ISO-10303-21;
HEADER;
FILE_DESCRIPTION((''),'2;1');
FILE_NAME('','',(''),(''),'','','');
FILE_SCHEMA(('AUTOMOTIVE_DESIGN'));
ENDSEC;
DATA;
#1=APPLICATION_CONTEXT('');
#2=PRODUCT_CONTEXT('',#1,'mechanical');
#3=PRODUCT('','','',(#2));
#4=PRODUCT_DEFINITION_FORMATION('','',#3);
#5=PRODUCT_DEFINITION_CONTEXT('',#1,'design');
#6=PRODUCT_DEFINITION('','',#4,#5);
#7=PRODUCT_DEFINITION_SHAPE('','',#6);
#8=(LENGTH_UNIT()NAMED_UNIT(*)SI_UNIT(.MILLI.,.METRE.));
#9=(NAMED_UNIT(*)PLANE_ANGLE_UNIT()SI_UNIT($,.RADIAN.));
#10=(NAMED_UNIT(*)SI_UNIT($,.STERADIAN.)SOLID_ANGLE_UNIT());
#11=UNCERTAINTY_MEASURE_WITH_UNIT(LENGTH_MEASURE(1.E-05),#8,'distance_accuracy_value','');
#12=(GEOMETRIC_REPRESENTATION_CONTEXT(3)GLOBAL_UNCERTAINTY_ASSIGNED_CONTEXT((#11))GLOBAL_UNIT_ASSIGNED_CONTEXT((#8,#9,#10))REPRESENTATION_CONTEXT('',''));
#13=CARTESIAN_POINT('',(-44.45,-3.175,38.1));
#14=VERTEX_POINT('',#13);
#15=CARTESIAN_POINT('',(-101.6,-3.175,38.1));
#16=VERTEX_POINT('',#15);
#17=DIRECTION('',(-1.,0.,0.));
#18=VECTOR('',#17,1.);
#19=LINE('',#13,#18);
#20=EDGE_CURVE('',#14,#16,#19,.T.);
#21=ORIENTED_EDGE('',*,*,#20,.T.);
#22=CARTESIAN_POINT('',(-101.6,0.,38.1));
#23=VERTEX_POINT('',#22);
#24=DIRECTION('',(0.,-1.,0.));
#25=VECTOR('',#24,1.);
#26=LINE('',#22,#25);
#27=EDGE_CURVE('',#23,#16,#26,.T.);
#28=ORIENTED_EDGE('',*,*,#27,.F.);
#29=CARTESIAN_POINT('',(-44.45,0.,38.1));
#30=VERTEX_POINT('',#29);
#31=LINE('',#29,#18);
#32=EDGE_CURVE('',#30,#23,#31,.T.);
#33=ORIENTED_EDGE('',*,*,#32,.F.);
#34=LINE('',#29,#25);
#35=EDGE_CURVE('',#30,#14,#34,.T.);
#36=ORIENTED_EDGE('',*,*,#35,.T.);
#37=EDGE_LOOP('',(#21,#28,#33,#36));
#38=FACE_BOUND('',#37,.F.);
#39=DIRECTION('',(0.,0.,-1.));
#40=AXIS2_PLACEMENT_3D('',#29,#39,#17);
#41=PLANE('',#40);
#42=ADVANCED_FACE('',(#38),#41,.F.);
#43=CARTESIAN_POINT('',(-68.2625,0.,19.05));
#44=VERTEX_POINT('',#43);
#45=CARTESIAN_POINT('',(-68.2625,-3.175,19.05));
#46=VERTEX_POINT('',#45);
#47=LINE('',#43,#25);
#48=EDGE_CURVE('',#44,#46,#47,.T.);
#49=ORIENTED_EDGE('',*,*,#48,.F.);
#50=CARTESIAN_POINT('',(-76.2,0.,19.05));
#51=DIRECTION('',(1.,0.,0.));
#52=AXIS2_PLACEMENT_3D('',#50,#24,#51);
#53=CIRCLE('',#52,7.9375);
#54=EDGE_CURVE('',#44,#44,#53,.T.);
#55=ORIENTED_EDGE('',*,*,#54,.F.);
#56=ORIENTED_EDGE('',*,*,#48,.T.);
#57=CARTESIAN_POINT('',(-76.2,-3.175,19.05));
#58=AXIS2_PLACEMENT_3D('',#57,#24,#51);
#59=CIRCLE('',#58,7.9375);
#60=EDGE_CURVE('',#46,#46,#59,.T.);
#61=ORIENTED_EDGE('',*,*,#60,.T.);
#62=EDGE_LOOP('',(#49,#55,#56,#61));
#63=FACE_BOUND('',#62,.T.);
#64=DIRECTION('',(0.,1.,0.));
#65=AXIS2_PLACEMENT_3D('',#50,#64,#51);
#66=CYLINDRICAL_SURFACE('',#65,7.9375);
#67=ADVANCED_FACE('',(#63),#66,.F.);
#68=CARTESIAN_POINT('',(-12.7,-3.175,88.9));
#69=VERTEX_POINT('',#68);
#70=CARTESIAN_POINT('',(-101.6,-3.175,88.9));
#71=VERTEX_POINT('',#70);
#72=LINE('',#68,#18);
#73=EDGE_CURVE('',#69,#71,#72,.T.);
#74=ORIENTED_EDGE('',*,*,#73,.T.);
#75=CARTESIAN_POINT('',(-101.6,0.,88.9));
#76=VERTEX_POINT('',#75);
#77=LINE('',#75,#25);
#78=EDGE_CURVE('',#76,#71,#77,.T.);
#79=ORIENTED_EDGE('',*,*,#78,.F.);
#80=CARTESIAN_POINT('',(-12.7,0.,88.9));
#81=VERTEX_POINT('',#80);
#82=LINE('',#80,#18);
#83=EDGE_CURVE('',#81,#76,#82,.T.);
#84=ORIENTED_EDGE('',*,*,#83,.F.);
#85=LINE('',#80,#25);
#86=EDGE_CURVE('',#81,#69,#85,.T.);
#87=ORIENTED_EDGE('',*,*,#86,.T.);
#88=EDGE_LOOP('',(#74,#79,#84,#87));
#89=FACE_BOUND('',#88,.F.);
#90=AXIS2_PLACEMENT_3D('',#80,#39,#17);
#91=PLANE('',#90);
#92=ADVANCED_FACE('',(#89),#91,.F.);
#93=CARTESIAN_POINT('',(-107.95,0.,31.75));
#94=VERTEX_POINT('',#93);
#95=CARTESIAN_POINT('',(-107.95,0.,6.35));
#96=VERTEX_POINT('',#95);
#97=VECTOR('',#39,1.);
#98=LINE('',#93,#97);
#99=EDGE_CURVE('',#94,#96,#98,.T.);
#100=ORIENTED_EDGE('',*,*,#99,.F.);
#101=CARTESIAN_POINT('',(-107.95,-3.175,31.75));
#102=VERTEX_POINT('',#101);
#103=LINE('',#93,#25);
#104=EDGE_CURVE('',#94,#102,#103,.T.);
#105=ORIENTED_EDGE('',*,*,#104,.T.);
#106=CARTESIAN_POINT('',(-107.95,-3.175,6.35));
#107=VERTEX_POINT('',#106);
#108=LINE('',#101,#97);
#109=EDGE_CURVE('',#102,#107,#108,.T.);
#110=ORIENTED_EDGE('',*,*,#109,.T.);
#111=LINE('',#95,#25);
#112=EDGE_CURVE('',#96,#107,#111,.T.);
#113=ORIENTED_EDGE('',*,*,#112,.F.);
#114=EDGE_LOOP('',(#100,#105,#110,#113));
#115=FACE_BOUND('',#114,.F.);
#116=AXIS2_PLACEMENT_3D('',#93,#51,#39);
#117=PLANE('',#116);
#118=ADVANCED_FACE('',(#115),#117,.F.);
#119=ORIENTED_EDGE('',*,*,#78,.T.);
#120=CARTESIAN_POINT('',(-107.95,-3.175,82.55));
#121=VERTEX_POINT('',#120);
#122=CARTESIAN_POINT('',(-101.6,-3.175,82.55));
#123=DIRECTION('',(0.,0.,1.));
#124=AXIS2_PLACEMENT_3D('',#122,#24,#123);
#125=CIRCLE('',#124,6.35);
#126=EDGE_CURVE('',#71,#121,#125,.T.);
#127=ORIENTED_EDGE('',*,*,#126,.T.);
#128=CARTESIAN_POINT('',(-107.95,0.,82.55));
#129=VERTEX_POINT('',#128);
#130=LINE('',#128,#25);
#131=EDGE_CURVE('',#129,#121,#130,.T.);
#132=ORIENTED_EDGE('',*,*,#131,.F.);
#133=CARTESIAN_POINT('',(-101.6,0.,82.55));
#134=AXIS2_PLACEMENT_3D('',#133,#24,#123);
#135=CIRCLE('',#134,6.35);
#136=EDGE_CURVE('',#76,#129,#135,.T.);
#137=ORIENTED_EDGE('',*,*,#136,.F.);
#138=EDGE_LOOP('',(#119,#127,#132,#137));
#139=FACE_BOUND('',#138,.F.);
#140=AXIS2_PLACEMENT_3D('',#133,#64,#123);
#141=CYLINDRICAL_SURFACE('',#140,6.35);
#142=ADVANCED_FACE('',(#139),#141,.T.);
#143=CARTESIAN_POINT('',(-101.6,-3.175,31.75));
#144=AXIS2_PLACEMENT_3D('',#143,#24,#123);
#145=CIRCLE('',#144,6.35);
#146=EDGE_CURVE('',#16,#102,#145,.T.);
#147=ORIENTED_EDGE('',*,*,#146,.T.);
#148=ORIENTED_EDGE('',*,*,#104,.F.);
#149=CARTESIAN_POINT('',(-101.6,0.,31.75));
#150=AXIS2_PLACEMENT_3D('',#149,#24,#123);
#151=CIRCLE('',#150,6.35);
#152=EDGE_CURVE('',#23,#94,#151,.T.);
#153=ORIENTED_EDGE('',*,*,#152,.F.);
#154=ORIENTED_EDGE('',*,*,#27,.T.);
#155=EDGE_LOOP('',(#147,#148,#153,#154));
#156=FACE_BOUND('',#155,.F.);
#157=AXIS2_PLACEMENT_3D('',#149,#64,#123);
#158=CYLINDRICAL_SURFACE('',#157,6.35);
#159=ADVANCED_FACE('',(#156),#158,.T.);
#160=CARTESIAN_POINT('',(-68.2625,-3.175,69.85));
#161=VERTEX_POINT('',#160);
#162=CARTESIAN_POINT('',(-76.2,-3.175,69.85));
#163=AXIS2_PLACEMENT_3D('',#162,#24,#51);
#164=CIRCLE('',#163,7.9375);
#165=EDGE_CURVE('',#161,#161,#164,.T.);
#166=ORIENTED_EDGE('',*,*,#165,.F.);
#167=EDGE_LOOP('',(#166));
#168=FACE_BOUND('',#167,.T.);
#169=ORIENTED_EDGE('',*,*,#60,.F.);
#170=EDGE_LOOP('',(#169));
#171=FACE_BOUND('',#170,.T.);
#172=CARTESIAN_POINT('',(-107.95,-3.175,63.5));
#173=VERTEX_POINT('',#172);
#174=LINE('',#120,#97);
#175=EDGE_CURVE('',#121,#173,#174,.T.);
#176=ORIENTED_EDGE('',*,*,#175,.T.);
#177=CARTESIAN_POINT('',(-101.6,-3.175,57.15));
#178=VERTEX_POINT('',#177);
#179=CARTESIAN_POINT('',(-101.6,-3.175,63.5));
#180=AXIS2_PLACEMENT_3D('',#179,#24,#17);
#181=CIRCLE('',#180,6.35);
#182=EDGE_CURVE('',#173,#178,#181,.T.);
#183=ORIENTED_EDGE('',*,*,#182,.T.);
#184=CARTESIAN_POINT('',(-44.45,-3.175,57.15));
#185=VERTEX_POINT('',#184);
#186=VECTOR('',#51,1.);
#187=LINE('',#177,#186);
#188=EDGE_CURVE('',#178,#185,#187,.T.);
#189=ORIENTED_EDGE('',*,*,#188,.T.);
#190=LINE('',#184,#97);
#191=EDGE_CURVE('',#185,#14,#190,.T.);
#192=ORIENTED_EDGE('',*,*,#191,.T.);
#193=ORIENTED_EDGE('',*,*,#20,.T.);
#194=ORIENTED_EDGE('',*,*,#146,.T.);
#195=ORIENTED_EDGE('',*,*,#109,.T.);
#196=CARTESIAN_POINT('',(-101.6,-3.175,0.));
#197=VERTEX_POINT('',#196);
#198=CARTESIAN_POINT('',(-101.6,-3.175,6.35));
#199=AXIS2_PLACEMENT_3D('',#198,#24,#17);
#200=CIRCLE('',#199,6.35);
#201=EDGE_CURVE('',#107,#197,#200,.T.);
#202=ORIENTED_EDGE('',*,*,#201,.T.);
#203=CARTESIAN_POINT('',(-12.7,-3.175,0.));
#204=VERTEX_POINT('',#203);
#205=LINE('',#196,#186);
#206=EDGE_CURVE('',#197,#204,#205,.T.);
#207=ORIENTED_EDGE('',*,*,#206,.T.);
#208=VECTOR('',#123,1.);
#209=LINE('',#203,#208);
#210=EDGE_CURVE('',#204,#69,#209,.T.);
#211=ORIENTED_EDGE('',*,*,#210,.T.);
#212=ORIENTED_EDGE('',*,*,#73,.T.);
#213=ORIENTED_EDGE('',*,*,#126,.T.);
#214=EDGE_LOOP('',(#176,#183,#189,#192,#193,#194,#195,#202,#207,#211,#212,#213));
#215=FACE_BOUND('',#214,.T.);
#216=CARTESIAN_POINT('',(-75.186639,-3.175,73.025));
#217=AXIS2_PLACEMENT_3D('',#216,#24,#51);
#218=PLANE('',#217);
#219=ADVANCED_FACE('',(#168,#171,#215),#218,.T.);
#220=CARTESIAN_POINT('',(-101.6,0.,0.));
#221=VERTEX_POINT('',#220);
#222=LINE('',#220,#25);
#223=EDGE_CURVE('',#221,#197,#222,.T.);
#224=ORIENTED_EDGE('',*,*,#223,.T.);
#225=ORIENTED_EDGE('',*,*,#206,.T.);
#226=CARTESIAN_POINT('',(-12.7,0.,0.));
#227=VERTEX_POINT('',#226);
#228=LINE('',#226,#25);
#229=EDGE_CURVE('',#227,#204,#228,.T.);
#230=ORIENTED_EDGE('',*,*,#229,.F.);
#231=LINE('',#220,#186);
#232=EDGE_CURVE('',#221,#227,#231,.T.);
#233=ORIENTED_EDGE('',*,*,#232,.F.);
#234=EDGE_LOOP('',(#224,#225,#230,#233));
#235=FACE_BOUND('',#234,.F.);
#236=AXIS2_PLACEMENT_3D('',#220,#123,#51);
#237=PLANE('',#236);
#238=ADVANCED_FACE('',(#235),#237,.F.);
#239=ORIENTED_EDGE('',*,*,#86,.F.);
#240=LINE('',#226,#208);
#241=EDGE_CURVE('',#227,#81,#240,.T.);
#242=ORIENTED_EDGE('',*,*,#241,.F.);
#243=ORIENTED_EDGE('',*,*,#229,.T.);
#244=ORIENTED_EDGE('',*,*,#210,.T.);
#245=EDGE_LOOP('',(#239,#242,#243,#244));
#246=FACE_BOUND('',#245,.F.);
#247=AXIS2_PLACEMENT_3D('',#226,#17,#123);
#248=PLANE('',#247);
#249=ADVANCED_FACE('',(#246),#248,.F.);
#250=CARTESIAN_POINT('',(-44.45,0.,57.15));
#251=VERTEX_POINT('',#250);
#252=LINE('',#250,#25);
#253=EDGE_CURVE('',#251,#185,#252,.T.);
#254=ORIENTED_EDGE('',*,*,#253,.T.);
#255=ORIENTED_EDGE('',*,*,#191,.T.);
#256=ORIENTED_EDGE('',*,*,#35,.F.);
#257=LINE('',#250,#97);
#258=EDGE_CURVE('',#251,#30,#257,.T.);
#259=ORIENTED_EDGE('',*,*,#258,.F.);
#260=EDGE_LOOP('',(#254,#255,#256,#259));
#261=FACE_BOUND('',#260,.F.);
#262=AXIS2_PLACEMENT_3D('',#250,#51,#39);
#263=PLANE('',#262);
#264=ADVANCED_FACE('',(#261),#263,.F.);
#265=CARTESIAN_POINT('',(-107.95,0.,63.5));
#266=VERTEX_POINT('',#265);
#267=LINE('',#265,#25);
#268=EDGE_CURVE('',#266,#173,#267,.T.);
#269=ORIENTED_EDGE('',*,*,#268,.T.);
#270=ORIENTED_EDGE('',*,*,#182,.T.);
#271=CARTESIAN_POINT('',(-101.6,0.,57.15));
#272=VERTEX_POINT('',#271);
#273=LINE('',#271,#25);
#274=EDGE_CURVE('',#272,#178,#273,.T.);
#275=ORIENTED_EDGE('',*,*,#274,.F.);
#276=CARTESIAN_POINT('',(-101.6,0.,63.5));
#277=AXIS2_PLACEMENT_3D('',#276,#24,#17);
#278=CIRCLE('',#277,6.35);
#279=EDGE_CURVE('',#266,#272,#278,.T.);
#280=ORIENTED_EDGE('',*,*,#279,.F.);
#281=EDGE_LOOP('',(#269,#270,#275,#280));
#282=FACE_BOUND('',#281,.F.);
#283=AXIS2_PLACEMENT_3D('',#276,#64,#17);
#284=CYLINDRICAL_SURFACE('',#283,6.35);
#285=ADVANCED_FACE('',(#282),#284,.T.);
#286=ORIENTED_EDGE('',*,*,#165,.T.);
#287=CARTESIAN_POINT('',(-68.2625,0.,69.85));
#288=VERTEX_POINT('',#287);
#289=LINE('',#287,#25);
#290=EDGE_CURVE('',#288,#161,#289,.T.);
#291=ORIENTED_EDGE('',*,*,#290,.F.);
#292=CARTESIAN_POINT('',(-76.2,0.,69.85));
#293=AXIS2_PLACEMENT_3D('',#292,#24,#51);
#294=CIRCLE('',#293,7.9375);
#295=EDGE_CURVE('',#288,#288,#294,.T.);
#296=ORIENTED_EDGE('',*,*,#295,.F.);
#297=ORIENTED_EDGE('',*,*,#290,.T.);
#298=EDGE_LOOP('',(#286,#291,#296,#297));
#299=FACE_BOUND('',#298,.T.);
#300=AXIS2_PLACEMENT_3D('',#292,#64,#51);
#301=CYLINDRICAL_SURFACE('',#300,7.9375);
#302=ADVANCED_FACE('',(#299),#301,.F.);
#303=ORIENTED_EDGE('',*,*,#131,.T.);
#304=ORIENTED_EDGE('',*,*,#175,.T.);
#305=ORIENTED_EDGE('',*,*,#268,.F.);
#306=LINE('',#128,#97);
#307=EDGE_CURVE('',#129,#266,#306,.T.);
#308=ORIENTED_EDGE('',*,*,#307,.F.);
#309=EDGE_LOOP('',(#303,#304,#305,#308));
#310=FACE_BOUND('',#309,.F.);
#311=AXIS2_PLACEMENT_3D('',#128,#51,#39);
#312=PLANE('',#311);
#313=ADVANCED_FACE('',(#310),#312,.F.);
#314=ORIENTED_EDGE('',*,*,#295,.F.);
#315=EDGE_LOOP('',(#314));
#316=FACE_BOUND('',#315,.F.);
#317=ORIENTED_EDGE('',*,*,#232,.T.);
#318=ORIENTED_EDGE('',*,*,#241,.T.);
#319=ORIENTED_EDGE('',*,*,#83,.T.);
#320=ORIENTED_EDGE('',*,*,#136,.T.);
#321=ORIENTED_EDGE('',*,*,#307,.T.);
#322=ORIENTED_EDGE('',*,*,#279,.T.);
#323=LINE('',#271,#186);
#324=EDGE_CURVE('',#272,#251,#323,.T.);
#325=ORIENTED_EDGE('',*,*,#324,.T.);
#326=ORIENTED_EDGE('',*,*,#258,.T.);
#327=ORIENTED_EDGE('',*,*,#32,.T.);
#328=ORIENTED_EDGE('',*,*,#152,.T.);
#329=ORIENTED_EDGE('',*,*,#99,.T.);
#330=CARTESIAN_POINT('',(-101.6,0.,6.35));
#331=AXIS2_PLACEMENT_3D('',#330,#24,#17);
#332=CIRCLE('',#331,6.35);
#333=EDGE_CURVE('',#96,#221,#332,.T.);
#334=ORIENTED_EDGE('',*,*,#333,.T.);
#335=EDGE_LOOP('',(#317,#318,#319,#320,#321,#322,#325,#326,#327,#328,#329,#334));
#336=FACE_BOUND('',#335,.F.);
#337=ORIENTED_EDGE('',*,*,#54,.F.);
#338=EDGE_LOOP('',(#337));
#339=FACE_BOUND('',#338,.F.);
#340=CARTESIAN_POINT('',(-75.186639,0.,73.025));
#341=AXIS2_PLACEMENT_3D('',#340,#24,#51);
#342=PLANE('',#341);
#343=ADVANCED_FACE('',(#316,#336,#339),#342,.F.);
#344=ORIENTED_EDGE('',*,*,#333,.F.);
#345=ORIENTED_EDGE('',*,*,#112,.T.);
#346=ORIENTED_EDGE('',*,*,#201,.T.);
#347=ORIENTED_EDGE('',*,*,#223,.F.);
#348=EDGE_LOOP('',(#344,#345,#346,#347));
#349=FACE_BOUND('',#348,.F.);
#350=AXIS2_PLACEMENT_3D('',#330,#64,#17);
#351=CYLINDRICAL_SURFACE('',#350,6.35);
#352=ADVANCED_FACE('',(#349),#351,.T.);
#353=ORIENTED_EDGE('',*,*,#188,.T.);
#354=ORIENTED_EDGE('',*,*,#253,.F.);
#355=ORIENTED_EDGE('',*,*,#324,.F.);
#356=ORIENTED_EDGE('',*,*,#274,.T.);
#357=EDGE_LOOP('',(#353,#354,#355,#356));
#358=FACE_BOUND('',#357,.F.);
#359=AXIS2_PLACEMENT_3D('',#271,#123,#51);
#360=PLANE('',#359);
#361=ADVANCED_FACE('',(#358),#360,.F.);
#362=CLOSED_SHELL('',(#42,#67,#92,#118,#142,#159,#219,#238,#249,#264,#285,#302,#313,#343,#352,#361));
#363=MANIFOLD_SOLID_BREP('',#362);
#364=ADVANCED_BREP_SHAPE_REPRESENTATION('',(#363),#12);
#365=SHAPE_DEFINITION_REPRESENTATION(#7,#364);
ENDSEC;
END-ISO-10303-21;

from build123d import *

# Parameters (mm, degrees)
F0_R     = 7.9375
F1_DEPTH = 3.175


# Not quite as in the source:
# - a feature names something its author has since deleted; it is built from what else it names


with BuildPart() as f1:
    # F0 (on Front) → F1 (new body)
    with BuildSketch(Plane.XZ):
        with BuildLine():
            Line((-107.95, 82.55), (-107.95, 63.5))
            ThreePointArc((-107.95, 63.5), (-106.0901280605, 59.0098719395), (-101.6, 57.15))
            Line((-101.6, 57.15), (-44.45, 57.15))
            Line((-44.45, 57.15), (-44.45, 88.9))
            Line((-44.45, 88.9), (-101.6, 88.9))
            ThreePointArc((-101.6, 88.9), (-106.0901280605, 87.0401280605), (-107.95, 82.55))
        make_face()
        with Locations((-76.2, 69.85)):
            Circle(F0_R, mode=Mode.SUBTRACT)
        Polygon((-44.45, 88.9), (-44.45, 57.15), (-44.45, 38.1), (-44.45, 0), (-12.7, 0), (-12.7, 88.9), align=None)
        with BuildLine():
            Line((-44.45, 0), (-44.45, 38.1))
            Line((-44.45, 38.1), (-101.6, 38.1))
            ThreePointArc((-101.6, 38.1), (-106.0901280605, 36.2401280605), (-107.95, 31.75))
            Line((-107.95, 31.75), (-107.95, 6.35))
            ThreePointArc((-107.95, 6.35), (-106.0901280605, 1.8598719395), (-101.6, 0))
            Line((-101.6, 0), (-95.25, 0))
            Line((-95.25, 0), (-44.45, 0))
        make_face()
        with Locations((-76.2, 19.05)):
            Circle(F0_R, mode=Mode.SUBTRACT)
    extrude(amount=F1_DEPTH)


solid = f1.part
